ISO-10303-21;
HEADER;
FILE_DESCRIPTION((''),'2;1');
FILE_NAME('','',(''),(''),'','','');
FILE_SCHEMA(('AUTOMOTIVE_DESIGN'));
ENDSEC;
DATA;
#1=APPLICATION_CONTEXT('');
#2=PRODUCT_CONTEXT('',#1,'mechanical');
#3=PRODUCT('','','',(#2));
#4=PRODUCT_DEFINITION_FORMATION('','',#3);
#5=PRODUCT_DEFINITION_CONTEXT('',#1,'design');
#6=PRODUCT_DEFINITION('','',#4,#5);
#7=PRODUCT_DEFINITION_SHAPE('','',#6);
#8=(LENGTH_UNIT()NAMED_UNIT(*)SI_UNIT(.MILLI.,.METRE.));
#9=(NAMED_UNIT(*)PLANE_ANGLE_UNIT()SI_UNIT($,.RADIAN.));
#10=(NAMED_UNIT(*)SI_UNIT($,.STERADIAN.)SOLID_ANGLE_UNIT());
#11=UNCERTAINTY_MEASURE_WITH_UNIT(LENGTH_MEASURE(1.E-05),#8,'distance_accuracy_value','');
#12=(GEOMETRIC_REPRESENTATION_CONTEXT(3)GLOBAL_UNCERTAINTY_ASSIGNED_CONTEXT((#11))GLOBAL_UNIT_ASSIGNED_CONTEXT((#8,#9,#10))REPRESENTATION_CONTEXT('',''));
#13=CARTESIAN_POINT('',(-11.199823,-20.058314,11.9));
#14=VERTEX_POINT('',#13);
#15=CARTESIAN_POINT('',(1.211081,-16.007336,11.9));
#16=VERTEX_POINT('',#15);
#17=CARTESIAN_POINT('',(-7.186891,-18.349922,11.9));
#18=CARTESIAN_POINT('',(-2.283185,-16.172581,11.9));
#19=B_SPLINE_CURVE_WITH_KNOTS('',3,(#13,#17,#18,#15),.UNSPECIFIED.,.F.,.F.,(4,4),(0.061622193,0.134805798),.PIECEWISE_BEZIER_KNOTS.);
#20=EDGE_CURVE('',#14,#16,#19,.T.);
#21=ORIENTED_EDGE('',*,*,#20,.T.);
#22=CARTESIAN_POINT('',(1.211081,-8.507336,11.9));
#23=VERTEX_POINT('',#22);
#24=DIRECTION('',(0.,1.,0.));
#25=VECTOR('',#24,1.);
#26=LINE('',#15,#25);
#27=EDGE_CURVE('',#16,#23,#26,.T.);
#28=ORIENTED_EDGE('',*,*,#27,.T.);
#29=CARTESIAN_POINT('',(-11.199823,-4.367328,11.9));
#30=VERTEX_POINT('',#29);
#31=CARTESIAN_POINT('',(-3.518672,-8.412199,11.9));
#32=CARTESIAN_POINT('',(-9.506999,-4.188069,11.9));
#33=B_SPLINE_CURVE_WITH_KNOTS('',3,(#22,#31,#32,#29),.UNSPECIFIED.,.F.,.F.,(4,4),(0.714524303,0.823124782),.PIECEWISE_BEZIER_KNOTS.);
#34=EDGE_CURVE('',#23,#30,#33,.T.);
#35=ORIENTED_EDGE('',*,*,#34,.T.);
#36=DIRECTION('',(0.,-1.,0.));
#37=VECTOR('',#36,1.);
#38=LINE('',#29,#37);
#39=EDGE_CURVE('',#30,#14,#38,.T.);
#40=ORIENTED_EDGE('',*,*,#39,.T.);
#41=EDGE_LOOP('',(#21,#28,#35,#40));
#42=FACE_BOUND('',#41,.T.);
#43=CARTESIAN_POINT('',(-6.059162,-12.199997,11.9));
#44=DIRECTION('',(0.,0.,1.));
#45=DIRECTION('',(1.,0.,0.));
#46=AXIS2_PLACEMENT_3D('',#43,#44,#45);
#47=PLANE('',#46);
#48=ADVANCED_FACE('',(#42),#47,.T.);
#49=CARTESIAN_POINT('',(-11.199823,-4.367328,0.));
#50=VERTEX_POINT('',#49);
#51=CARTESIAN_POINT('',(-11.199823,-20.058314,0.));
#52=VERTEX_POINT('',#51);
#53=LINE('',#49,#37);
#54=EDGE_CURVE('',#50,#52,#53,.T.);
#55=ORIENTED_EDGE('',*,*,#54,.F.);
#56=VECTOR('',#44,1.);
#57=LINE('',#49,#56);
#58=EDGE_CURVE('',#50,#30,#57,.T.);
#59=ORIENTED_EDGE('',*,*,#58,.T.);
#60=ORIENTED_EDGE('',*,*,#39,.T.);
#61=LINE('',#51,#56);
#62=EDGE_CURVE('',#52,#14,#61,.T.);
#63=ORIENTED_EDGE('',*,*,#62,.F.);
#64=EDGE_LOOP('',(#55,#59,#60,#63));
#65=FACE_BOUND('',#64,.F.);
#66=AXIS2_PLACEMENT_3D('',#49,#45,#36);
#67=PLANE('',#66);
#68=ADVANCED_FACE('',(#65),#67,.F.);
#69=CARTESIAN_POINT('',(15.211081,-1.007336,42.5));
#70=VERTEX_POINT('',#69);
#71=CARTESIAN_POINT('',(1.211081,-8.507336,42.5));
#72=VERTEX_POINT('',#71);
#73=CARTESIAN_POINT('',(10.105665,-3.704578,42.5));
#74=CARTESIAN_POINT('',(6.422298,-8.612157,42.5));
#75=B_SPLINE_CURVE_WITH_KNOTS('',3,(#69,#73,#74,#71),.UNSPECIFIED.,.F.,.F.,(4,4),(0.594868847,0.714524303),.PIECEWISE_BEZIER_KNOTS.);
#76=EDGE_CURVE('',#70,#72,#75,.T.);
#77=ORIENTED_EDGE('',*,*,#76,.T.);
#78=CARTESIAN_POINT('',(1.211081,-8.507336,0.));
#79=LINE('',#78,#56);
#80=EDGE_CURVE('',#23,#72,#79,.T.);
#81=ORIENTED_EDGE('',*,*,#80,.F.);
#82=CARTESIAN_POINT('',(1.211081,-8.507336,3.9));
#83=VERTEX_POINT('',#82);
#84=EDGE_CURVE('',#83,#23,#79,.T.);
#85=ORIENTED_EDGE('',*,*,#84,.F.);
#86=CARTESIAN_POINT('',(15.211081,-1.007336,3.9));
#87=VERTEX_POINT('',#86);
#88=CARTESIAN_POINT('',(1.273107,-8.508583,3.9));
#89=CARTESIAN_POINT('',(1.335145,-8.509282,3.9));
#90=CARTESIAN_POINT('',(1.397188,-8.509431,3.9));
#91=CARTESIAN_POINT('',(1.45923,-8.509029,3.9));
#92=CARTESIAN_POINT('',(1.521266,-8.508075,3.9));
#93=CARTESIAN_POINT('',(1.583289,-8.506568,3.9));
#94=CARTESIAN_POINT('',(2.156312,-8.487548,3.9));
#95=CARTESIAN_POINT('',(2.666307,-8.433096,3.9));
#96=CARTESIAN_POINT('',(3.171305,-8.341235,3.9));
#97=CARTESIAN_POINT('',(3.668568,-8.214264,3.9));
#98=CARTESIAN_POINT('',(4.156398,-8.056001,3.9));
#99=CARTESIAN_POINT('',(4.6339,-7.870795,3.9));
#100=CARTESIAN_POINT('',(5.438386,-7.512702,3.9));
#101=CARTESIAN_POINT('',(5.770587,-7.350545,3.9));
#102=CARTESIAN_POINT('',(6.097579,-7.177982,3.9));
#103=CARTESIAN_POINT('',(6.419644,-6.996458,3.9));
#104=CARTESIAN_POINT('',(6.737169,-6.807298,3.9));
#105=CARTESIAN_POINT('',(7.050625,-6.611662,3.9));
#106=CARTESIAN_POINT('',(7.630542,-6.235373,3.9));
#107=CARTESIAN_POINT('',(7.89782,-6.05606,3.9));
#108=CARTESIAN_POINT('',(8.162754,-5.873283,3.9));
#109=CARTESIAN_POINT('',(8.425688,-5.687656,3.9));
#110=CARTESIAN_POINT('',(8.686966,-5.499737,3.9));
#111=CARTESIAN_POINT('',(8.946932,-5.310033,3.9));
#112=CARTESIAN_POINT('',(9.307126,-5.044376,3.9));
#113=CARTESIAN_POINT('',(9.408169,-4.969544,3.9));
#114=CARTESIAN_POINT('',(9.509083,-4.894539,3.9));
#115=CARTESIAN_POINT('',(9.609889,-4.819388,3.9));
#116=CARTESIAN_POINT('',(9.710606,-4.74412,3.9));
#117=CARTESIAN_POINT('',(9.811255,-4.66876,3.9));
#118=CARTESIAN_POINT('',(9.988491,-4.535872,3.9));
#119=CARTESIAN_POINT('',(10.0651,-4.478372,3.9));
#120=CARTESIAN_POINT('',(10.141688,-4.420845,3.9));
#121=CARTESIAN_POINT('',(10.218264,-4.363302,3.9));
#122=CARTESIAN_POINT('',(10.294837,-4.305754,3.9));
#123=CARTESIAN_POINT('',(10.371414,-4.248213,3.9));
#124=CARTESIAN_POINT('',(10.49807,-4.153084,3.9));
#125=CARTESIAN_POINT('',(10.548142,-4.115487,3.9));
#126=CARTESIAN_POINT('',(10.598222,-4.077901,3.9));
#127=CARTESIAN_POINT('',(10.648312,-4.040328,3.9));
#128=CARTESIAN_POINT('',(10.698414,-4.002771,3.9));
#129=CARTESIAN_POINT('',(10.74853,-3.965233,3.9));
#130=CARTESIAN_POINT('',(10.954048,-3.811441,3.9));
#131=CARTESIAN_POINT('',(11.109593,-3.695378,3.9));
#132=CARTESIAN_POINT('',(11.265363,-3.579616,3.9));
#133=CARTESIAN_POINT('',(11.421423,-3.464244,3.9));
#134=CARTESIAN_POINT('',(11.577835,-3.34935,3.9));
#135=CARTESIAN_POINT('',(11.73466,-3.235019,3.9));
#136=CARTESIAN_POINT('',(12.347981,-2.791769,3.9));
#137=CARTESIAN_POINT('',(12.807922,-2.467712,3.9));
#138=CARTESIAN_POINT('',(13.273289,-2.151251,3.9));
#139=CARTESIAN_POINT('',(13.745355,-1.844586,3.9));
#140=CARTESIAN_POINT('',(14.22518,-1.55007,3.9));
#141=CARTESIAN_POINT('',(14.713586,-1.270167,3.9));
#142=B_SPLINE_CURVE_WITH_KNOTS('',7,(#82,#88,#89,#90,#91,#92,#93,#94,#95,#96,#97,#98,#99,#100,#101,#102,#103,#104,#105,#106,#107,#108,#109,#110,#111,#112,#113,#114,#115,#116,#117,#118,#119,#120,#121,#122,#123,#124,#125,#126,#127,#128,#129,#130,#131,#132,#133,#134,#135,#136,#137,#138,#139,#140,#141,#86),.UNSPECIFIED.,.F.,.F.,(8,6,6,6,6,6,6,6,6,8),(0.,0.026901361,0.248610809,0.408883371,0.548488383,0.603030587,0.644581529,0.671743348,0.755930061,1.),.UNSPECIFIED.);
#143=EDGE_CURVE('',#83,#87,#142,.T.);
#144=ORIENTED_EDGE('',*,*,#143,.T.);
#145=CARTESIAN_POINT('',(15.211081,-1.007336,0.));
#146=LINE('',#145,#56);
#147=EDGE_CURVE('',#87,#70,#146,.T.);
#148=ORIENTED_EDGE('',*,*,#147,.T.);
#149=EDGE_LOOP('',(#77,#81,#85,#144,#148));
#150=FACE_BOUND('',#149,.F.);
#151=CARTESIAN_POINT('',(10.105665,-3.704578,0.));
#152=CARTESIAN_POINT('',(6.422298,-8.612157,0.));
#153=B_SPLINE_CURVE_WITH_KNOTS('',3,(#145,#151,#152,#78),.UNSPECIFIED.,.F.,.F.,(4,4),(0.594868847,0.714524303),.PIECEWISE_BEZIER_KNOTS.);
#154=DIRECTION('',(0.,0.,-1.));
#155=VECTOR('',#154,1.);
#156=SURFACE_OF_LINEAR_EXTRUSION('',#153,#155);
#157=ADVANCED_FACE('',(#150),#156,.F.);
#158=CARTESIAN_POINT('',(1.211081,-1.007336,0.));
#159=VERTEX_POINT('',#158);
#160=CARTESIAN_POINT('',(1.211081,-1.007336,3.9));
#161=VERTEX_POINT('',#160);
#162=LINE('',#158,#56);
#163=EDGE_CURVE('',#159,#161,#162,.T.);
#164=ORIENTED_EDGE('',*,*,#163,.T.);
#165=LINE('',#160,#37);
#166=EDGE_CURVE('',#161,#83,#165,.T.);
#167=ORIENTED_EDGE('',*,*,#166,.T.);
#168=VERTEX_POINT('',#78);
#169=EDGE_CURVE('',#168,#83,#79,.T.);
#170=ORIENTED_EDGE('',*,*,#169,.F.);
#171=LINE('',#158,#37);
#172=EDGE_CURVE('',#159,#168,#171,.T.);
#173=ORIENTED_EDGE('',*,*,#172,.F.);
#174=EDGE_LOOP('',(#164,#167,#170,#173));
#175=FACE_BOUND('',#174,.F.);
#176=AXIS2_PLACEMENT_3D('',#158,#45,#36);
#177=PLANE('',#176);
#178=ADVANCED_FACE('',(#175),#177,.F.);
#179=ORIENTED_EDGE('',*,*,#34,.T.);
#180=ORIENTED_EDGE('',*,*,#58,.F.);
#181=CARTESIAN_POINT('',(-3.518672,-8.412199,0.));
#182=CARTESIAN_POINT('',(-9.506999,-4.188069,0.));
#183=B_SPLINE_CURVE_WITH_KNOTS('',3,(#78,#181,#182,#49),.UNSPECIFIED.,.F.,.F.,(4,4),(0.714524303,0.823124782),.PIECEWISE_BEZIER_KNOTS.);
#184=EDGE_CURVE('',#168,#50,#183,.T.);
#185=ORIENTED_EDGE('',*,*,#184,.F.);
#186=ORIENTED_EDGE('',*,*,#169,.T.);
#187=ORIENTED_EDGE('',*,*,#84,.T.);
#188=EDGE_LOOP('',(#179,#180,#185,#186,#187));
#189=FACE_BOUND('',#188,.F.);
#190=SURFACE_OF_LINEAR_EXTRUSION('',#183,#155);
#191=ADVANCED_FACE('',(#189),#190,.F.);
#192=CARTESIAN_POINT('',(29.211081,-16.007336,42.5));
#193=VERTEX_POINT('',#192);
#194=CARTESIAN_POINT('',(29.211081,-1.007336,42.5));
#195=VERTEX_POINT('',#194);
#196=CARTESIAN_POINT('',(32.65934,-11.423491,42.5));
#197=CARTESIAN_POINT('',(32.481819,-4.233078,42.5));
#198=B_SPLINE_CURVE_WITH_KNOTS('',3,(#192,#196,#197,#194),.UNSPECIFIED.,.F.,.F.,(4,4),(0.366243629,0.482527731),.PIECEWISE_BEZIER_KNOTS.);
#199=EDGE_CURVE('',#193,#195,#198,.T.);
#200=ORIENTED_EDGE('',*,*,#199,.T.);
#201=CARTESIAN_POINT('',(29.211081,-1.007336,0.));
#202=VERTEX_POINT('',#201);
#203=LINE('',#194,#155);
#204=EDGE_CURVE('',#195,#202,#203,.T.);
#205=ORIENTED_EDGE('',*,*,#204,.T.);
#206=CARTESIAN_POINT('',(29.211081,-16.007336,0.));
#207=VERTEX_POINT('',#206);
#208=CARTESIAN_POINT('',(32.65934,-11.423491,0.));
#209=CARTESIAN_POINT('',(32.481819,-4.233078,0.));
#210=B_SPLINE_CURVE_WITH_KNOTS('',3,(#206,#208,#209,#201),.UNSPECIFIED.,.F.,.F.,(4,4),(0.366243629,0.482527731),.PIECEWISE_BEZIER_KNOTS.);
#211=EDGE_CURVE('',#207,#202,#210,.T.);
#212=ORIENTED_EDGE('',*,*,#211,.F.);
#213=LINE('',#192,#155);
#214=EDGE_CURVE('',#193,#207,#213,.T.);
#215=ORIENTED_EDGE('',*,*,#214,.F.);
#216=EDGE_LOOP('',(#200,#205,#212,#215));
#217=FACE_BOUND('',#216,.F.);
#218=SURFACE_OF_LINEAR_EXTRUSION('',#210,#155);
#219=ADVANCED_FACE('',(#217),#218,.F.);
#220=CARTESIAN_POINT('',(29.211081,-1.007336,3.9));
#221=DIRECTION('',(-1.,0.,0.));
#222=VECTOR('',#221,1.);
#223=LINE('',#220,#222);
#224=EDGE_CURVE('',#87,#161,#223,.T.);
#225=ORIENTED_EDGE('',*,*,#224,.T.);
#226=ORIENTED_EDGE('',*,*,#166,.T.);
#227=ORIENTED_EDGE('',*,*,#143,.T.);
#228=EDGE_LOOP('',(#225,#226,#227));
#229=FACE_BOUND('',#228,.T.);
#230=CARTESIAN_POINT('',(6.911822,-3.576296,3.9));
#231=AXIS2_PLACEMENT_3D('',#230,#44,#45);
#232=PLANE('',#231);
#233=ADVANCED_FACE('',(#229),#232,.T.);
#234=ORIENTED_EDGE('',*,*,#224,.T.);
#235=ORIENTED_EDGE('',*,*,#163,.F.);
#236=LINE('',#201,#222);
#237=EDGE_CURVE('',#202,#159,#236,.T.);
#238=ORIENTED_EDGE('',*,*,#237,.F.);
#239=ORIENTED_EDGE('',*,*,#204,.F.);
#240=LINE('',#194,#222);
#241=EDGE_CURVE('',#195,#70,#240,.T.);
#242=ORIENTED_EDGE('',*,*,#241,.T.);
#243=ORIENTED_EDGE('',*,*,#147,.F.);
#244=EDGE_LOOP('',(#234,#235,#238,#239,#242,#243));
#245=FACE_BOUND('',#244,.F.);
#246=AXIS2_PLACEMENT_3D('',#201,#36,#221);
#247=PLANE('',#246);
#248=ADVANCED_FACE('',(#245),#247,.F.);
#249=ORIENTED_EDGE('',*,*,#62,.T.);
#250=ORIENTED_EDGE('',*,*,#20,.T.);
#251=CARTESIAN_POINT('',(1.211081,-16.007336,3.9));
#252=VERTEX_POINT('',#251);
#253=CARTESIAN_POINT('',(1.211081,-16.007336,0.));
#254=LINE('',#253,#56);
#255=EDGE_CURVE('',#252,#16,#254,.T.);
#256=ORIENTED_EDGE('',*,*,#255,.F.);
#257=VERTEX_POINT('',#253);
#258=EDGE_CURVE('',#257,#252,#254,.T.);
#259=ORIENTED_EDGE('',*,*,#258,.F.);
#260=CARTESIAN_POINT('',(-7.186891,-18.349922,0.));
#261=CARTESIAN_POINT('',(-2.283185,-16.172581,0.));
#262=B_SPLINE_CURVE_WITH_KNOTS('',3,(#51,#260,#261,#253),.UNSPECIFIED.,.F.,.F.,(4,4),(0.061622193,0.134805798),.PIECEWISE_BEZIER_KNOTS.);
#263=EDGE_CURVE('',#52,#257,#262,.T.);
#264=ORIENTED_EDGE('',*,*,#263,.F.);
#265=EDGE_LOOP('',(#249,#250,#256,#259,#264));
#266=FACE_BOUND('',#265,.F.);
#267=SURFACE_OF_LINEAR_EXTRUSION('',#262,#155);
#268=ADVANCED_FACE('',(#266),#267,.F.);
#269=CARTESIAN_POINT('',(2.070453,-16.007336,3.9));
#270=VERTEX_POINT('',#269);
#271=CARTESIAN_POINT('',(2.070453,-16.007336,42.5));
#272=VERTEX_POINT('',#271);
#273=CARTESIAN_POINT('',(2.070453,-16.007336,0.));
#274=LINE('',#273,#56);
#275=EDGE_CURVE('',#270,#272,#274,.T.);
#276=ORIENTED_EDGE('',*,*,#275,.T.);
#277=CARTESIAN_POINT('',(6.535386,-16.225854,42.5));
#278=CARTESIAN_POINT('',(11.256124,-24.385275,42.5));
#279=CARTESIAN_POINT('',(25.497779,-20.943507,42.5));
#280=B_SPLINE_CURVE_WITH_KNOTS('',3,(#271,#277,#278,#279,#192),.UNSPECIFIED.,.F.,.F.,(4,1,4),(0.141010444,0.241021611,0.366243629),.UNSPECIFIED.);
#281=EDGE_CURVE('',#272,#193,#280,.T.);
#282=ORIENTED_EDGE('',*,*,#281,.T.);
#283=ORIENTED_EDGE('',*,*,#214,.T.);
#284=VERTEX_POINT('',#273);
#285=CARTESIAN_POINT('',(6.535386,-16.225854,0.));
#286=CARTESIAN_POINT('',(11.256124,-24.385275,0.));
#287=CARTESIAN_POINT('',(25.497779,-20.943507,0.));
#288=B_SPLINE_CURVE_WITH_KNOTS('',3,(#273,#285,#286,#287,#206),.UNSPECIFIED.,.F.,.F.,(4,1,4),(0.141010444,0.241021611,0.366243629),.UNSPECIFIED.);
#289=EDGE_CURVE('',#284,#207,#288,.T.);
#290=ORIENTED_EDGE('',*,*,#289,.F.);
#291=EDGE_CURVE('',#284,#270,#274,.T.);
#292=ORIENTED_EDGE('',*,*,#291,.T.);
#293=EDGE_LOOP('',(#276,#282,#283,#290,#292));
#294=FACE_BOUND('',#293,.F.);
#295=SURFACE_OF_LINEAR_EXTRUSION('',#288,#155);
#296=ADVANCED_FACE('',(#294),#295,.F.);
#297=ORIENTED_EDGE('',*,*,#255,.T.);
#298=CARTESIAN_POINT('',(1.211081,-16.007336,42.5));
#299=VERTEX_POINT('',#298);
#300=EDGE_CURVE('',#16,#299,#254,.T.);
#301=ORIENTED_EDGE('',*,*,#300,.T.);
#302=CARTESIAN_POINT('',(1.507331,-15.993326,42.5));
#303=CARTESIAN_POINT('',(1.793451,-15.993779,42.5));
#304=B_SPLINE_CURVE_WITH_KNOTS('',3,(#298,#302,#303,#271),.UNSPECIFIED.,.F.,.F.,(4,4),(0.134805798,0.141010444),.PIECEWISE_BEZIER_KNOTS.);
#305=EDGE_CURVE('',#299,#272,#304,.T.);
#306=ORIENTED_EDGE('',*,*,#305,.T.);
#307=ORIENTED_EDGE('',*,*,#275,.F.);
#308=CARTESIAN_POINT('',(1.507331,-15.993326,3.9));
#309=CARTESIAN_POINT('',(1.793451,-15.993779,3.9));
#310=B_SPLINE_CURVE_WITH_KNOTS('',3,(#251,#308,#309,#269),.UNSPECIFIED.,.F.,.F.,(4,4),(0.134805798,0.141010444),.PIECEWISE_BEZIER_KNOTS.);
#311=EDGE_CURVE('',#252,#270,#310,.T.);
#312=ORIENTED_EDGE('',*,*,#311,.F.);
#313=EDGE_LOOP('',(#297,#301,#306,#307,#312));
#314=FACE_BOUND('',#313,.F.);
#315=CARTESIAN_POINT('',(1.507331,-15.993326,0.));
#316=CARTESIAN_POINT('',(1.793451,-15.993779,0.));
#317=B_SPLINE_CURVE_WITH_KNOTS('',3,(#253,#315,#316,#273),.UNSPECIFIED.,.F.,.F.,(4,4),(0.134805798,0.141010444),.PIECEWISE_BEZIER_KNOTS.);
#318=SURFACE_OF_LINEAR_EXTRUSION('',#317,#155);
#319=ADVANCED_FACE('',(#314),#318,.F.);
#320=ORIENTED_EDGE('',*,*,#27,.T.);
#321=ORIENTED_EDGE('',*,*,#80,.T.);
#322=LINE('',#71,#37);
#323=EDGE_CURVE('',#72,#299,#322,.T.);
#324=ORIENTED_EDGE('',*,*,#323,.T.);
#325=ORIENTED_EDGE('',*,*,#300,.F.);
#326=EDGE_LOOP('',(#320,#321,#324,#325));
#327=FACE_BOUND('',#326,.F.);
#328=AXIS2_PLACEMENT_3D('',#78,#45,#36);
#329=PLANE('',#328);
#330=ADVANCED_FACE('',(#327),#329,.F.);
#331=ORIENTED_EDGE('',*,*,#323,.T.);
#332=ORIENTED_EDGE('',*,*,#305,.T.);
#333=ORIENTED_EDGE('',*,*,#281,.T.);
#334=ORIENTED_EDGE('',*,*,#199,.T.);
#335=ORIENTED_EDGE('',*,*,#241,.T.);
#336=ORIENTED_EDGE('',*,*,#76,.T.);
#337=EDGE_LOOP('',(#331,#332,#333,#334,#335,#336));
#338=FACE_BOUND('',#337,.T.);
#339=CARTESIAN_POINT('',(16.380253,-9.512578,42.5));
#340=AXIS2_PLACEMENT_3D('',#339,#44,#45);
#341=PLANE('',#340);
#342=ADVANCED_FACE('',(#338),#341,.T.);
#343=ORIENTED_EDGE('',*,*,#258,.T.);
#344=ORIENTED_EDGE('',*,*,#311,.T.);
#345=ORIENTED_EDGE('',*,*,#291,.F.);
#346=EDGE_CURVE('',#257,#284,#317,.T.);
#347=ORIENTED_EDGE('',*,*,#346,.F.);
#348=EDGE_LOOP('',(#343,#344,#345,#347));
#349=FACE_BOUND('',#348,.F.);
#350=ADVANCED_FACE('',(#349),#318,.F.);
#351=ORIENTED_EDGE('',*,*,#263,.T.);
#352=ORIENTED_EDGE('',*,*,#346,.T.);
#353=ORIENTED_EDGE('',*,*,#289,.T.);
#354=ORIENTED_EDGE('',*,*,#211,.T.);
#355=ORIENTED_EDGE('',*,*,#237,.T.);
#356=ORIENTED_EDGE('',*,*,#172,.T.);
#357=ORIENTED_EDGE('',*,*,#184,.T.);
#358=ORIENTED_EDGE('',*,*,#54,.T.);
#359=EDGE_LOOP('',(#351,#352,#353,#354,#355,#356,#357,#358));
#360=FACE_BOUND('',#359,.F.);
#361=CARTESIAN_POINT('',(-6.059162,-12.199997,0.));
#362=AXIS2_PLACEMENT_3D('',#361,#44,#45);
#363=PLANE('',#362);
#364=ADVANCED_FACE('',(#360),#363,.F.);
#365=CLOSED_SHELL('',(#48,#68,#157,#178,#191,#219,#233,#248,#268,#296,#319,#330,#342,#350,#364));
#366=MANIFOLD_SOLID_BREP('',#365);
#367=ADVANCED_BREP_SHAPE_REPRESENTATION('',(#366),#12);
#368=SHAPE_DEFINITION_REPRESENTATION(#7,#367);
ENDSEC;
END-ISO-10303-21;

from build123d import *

# Parameters (mm, degrees)
F1_DEPTH = 3.9
F2_DEPTH = 11.9
F3_DEPTH = 42.5


with BuildPart() as f1:
    # F0 (on Top) → F1 (new body)
    with BuildSketch(Plane.XY):
        with BuildLine():
            Line((15.2110805884, -1.0073357602), (1.2110805884, -1.0073357602))
            Line((1.2110805884, -1.0073357602), (1.2110805884, -8.5073357602))
            add(Edge.make_bspline(
                [(15.2110805884, -1.0073357602), (10.1056651112, -3.7045784545), (6.4222975956, -8.6121569817), (1.2110805884, -8.5073357602)],
                knots=[0.5948688465, 0.5948688465, 0.5948688465, 0.5948688465, 0.7145243028, 0.7145243028, 0.7145243028, 0.7145243028], degree=3))
        make_face()
        with BuildLine():
            Line((29.2110805884, -1.0073357602), (15.2110805884, -1.0073357602))
            add(Edge.make_bspline(
                [(15.2110805884, -1.0073357602), (10.1056651112, -3.7045784545), (6.4222975956, -8.6121569817), (1.2110805884, -8.5073357602)],
                knots=[0.5948688465, 0.5948688465, 0.5948688465, 0.5948688465, 0.7145243028, 0.7145243028, 0.7145243028, 0.7145243028], degree=3))
            Line((1.2110805884, -8.5073357602), (1.2110805884, -16.0073357602))
            add(Edge.make_bspline(
                [(1.2110805884, -16.0073357602), (1.5073310932, -15.9933259222), (1.7934505794, -15.9937789675), (2.0704529167, -16.0073357602)],
                knots=[0.1348057981, 0.1348057981, 0.1348057981, 0.1348057981, 0.1410104438, 0.1410104438, 0.1410104438, 0.1410104438], degree=3))
            Line((2.0704529167, -16.0073357602), (29.2110805884, -16.0073357602))
            Line((29.2110805884, -16.0073357602), (29.2110805884, -1.0073357602))
        make_face()
    extrude(amount=F1_DEPTH)

    # F0 (on Top) → F2 (join)
    with BuildSketch(Plane.XY):
        with BuildLine():
            Line((1.2110805884, -16.0073357602), (1.2110805884, -8.5073357602))
            add(Edge.make_bspline(
                [(1.2110805884, -8.5073357602), (-3.5186716625, -8.4121989798), (-9.506998743, -4.1880690008), (-11.1998226494, -4.3673282489)],
                knots=[0.7145243028, 0.7145243028, 0.7145243028, 0.7145243028, 0.823124782, 0.823124782, 0.823124782, 0.823124782], degree=3))
            Line((-11.1998226499, -4.367328249), (-11.1998226499, -20.0583143803))
            add(Edge.make_bspline(
                [(-11.1998226499, -20.0583143803), (-7.1868911838, -18.3499221531), (-2.2831850449, -16.1725813711), (1.2110805884, -16.0073357602)],
                knots=[0.0616221929, 0.0616221929, 0.0616221929, 0.0616221929, 0.1348057981, 0.1348057981, 0.1348057981, 0.1348057981], degree=3))
        make_face()
    extrude(amount=F2_DEPTH)

    # F0 (on Top) → F3 (join)
    with BuildSketch(Plane.XY):
        with BuildLine():
            Line((29.2110805884, -1.0073357602), (15.2110805884, -1.0073357602))
            add(Edge.make_bspline(
                [(15.2110805884, -1.0073357602), (10.1056651112, -3.7045784545), (6.4222975956, -8.6121569817), (1.2110805884, -8.5073357602)],
                knots=[0.5948688465, 0.5948688465, 0.5948688465, 0.5948688465, 0.7145243028, 0.7145243028, 0.7145243028, 0.7145243028], degree=3))
            Line((1.2110805884, -8.5073357602), (1.2110805884, -16.0073357602))
            add(Edge.make_bspline(
                [(1.2110805884, -16.0073357602), (1.5073310932, -15.9933259222), (1.7934505794, -15.9937789675), (2.0704529167, -16.0073357602)],
                knots=[0.1348057981, 0.1348057981, 0.1348057981, 0.1348057981, 0.1410104438, 0.1410104438, 0.1410104438, 0.1410104438], degree=3))
            Line((2.0704529167, -16.0073357602), (29.2110805884, -16.0073357602))
            Line((29.2110805884, -16.0073357602), (29.2110805884, -1.0073357602))
        make_face()
        with BuildLine():
            add(Edge.make_bspline(
                [(29.2110805884, -16.0073357602), (32.6593398461, -11.4234913165), (32.4818190242, -4.2330775311), (29.2110805884, -1.0073357602)],
                knots=[0.3662436292, 0.3662436292, 0.3662436292, 0.3662436292, 0.4825277311, 0.4825277311, 0.4825277311, 0.4825277311], degree=3))
            Line((29.2110805884, -1.0073357602), (29.2110805884, -16.0073357602))
        make_face()
        with BuildLine():
            add(Edge.make_bspline(
                [(2.0704529167, -16.0073357602), (6.535385921, -16.225854391), (11.2561235238, -24.3852753557), (25.4977786279, -20.9435071114), (29.2110805884, -16.0073357602)],
                knots=[0.1410104438, 0.1410104438, 0.1410104438, 0.1410104438, 0.2410216109, 0.3662436292, 0.3662436292, 0.3662436292, 0.3662436292], degree=3))
            Line((29.2110805884, -16.0073357602), (2.0704529167, -16.0073357602))
        make_face()
    extrude(amount=F3_DEPTH)


solid = f1.part
